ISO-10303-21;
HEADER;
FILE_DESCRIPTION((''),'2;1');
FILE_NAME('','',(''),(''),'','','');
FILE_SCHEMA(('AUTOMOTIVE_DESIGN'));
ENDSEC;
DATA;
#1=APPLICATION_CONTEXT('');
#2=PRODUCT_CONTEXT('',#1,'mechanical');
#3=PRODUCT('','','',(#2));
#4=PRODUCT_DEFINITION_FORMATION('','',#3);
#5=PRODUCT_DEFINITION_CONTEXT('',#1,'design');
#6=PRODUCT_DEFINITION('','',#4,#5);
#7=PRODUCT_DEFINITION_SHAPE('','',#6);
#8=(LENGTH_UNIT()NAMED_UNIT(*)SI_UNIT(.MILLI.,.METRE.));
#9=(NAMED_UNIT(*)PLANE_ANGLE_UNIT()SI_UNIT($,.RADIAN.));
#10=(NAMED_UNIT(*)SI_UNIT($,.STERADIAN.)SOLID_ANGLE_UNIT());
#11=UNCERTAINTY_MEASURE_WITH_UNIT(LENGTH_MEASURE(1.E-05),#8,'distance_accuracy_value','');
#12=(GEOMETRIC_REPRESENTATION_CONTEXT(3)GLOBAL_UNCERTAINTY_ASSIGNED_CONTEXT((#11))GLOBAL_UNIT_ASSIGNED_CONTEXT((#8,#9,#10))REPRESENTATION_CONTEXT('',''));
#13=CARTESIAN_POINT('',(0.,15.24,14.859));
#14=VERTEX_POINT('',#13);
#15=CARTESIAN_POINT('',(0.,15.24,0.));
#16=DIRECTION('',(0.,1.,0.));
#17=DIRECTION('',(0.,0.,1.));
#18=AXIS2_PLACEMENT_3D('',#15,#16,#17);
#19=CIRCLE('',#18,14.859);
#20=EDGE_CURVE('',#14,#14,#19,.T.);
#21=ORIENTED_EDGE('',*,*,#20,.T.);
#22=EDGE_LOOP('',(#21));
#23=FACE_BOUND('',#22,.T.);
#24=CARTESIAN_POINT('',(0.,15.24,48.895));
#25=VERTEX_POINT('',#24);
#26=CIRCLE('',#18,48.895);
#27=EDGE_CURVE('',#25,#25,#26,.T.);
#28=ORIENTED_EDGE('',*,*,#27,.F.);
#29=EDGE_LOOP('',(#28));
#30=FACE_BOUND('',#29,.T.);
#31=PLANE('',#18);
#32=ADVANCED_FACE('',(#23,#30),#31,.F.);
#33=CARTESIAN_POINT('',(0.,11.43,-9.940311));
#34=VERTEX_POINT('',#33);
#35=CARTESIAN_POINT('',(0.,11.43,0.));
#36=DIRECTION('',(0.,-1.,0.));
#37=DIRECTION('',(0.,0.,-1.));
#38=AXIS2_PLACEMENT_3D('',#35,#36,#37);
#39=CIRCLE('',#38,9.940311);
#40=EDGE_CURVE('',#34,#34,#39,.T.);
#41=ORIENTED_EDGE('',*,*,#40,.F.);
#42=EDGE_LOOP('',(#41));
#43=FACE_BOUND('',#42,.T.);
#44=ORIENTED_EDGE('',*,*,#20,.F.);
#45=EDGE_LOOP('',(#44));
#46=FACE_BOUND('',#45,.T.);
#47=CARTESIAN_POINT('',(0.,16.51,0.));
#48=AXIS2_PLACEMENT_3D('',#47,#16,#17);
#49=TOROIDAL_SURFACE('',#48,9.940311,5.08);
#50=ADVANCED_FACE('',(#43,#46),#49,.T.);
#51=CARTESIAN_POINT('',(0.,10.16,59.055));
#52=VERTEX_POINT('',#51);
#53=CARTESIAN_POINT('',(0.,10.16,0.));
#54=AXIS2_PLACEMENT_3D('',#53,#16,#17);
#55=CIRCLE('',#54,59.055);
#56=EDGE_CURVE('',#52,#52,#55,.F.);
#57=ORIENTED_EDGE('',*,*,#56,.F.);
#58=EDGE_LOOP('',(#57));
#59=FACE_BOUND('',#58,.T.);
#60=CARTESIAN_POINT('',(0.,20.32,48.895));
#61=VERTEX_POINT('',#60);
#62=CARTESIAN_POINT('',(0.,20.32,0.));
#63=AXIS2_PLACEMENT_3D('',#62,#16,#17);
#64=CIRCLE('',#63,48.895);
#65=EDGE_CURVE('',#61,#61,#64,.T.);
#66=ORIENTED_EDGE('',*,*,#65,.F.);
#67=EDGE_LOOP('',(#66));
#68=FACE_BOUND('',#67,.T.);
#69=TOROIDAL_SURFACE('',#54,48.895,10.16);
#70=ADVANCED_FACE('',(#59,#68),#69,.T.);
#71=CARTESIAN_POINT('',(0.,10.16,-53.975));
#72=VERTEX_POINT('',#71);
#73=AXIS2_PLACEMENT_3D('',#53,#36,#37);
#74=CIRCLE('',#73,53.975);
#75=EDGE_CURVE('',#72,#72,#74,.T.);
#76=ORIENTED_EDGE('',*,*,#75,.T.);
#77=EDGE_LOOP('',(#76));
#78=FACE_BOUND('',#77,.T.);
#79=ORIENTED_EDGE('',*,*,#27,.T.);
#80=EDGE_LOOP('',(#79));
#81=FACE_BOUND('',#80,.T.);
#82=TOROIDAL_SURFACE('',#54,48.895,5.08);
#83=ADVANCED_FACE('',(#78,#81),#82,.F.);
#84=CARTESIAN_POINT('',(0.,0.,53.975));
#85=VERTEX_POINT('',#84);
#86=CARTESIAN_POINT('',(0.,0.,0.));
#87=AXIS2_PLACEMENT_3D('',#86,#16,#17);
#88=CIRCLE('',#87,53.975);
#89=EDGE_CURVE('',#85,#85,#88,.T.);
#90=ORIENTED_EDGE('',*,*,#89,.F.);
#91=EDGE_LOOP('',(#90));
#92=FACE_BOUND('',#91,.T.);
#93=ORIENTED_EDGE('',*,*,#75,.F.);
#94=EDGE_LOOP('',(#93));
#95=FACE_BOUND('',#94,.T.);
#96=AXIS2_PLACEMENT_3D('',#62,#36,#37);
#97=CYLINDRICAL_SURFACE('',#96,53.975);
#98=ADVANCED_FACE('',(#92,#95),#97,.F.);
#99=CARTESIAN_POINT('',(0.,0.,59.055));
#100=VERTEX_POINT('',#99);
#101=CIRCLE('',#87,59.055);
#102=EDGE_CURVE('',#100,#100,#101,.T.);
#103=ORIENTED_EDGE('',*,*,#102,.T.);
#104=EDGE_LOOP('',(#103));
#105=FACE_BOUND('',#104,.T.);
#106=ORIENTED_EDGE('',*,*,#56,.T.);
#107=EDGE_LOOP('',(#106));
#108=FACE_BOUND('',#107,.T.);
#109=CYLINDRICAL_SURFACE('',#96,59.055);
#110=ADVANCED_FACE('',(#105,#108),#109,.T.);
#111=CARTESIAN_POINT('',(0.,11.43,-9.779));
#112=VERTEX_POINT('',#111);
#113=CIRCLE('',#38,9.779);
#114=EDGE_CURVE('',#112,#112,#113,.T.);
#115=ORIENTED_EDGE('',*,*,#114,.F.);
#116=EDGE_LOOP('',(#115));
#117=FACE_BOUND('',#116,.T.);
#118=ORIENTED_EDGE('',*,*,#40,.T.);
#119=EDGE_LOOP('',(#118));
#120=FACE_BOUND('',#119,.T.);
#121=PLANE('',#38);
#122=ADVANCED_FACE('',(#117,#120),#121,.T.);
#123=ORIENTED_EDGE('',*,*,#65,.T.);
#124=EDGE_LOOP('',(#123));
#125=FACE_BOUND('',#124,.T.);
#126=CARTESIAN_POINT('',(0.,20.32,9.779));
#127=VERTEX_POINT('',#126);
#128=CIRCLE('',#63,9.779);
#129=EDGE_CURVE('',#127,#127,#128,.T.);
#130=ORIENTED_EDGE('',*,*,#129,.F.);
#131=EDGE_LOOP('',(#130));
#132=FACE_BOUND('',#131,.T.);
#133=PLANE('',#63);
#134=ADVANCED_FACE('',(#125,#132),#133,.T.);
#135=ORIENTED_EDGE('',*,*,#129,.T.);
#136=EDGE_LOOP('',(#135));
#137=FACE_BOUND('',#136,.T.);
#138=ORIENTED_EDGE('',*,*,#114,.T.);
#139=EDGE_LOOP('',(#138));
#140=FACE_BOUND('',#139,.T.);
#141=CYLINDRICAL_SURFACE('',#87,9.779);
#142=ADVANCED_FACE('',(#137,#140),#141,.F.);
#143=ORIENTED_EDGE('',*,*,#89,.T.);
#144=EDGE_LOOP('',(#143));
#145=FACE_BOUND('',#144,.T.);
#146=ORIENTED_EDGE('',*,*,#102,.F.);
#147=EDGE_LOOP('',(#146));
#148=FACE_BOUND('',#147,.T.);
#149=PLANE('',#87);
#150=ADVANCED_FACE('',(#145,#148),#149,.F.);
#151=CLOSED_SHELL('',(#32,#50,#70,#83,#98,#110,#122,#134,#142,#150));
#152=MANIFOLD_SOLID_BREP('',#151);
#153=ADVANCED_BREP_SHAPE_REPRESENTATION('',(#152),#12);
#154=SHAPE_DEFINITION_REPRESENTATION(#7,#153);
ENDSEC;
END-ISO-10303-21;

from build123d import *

# Parameters (mm, degrees)
SKETCH1_R           = 59.055
BOSS_EXTRUDE1_DEPTH = 20.32
SKETCH2_R           = 9.779
CUT_EXTRUDE1_DEPTH  = 86.952826888
FILLET1_R           = 10.16
SHELL2_T            = -5.08
CUT_EXTRUDE3_START  = -11.43
SKETCH4_R           = 14.859
SKETCH4_R_2         = 9.779
CUT_EXTRUDE3_DEPTH  = 11.43
FILLET3_R           = 5.08


with BuildPart() as part:
    # Sketch1 → Boss-Extrude1 (new body)
    with BuildSketch(Plane(origin=(0, 0, 0), x_dir=(1, 0, 0), z_dir=(0, 1, 0))):
        with Locations(Location((0, 0, 0), (0, 0, 270))):
            Circle(SKETCH1_R)
    extrude(amount=BOSS_EXTRUDE1_DEPTH)

    # Sketch2 → Cut-Extrude1 (cut, through all)
    with BuildSketch(Plane(origin=(0, 20.32, 0), x_dir=(1, 0, 0), z_dir=(0, 1, 0))):
        with Locations(Location((0, 0, 0), (0, 0, 270))):
            Circle(SKETCH2_R)
    extrude(amount=-CUT_EXTRUDE1_DEPTH, mode=Mode.SUBTRACT)

    # Fillet1
    fillet1_edges = [part.edges().sort_by_distance(p)[0] for p in [
        (0, 20.32, -59.055),
    ]]
    fillet(fillet1_edges, radius=FILLET1_R)

    # Shell2
    shell2_openings = [part.faces().sort_by_distance(p)[0] for p in [
        (0, 0, -57.384672361),
    ]]
    offset(amount=SHELL2_T, openings=shell2_openings, kind=Kind.INTERSECTION)

    # Sketch4 → Cut-Extrude3 (cut)
    with BuildSketch(Plane.XZ.offset(CUT_EXTRUDE3_START)):
        with Locations(Location((0, 0, 0), (0, 0, 90))):
            Circle(SKETCH4_R)
        with Locations(Location((0, 0, 0), (0, 0, 90))):
            Circle(SKETCH4_R_2, mode=Mode.SUBTRACT)
    extrude(amount=CUT_EXTRUDE3_DEPTH, mode=Mode.SUBTRACT)

    # Fillet3
    # the kernel refuses this fillet: 5.08 mm, written as the material it takes off along each edge
    with BuildSketch(Plane(origin=(0, 11.43, 0), x_dir=(0, 0, 1), z_dir=(1, 0, 0))) as fillet3_piece_1:
        with BuildLine():
            CenterArc((9.94031115, -5.08), FILLET3_R, 14.477512186, 75.522487814)
            Line((14.859, -3.81), (14.957373777, -3.7846))
            ThreePointArc((14.957373777, -3.7846), (14.9606, -1.905), (14.9606, 0))
            Line((14.9606, 0), (14.859, 0.1016))
            Line((14.859, 0.1016), (9.94031115, 0.1016))
            Line((9.94031115, 0.1016), (9.94031115, 0))
        make_face()
    revolve(axis=Axis((0, 11.43, 0), (0, -1, 0)), mode=Mode.SUBTRACT)


solid = part.part
